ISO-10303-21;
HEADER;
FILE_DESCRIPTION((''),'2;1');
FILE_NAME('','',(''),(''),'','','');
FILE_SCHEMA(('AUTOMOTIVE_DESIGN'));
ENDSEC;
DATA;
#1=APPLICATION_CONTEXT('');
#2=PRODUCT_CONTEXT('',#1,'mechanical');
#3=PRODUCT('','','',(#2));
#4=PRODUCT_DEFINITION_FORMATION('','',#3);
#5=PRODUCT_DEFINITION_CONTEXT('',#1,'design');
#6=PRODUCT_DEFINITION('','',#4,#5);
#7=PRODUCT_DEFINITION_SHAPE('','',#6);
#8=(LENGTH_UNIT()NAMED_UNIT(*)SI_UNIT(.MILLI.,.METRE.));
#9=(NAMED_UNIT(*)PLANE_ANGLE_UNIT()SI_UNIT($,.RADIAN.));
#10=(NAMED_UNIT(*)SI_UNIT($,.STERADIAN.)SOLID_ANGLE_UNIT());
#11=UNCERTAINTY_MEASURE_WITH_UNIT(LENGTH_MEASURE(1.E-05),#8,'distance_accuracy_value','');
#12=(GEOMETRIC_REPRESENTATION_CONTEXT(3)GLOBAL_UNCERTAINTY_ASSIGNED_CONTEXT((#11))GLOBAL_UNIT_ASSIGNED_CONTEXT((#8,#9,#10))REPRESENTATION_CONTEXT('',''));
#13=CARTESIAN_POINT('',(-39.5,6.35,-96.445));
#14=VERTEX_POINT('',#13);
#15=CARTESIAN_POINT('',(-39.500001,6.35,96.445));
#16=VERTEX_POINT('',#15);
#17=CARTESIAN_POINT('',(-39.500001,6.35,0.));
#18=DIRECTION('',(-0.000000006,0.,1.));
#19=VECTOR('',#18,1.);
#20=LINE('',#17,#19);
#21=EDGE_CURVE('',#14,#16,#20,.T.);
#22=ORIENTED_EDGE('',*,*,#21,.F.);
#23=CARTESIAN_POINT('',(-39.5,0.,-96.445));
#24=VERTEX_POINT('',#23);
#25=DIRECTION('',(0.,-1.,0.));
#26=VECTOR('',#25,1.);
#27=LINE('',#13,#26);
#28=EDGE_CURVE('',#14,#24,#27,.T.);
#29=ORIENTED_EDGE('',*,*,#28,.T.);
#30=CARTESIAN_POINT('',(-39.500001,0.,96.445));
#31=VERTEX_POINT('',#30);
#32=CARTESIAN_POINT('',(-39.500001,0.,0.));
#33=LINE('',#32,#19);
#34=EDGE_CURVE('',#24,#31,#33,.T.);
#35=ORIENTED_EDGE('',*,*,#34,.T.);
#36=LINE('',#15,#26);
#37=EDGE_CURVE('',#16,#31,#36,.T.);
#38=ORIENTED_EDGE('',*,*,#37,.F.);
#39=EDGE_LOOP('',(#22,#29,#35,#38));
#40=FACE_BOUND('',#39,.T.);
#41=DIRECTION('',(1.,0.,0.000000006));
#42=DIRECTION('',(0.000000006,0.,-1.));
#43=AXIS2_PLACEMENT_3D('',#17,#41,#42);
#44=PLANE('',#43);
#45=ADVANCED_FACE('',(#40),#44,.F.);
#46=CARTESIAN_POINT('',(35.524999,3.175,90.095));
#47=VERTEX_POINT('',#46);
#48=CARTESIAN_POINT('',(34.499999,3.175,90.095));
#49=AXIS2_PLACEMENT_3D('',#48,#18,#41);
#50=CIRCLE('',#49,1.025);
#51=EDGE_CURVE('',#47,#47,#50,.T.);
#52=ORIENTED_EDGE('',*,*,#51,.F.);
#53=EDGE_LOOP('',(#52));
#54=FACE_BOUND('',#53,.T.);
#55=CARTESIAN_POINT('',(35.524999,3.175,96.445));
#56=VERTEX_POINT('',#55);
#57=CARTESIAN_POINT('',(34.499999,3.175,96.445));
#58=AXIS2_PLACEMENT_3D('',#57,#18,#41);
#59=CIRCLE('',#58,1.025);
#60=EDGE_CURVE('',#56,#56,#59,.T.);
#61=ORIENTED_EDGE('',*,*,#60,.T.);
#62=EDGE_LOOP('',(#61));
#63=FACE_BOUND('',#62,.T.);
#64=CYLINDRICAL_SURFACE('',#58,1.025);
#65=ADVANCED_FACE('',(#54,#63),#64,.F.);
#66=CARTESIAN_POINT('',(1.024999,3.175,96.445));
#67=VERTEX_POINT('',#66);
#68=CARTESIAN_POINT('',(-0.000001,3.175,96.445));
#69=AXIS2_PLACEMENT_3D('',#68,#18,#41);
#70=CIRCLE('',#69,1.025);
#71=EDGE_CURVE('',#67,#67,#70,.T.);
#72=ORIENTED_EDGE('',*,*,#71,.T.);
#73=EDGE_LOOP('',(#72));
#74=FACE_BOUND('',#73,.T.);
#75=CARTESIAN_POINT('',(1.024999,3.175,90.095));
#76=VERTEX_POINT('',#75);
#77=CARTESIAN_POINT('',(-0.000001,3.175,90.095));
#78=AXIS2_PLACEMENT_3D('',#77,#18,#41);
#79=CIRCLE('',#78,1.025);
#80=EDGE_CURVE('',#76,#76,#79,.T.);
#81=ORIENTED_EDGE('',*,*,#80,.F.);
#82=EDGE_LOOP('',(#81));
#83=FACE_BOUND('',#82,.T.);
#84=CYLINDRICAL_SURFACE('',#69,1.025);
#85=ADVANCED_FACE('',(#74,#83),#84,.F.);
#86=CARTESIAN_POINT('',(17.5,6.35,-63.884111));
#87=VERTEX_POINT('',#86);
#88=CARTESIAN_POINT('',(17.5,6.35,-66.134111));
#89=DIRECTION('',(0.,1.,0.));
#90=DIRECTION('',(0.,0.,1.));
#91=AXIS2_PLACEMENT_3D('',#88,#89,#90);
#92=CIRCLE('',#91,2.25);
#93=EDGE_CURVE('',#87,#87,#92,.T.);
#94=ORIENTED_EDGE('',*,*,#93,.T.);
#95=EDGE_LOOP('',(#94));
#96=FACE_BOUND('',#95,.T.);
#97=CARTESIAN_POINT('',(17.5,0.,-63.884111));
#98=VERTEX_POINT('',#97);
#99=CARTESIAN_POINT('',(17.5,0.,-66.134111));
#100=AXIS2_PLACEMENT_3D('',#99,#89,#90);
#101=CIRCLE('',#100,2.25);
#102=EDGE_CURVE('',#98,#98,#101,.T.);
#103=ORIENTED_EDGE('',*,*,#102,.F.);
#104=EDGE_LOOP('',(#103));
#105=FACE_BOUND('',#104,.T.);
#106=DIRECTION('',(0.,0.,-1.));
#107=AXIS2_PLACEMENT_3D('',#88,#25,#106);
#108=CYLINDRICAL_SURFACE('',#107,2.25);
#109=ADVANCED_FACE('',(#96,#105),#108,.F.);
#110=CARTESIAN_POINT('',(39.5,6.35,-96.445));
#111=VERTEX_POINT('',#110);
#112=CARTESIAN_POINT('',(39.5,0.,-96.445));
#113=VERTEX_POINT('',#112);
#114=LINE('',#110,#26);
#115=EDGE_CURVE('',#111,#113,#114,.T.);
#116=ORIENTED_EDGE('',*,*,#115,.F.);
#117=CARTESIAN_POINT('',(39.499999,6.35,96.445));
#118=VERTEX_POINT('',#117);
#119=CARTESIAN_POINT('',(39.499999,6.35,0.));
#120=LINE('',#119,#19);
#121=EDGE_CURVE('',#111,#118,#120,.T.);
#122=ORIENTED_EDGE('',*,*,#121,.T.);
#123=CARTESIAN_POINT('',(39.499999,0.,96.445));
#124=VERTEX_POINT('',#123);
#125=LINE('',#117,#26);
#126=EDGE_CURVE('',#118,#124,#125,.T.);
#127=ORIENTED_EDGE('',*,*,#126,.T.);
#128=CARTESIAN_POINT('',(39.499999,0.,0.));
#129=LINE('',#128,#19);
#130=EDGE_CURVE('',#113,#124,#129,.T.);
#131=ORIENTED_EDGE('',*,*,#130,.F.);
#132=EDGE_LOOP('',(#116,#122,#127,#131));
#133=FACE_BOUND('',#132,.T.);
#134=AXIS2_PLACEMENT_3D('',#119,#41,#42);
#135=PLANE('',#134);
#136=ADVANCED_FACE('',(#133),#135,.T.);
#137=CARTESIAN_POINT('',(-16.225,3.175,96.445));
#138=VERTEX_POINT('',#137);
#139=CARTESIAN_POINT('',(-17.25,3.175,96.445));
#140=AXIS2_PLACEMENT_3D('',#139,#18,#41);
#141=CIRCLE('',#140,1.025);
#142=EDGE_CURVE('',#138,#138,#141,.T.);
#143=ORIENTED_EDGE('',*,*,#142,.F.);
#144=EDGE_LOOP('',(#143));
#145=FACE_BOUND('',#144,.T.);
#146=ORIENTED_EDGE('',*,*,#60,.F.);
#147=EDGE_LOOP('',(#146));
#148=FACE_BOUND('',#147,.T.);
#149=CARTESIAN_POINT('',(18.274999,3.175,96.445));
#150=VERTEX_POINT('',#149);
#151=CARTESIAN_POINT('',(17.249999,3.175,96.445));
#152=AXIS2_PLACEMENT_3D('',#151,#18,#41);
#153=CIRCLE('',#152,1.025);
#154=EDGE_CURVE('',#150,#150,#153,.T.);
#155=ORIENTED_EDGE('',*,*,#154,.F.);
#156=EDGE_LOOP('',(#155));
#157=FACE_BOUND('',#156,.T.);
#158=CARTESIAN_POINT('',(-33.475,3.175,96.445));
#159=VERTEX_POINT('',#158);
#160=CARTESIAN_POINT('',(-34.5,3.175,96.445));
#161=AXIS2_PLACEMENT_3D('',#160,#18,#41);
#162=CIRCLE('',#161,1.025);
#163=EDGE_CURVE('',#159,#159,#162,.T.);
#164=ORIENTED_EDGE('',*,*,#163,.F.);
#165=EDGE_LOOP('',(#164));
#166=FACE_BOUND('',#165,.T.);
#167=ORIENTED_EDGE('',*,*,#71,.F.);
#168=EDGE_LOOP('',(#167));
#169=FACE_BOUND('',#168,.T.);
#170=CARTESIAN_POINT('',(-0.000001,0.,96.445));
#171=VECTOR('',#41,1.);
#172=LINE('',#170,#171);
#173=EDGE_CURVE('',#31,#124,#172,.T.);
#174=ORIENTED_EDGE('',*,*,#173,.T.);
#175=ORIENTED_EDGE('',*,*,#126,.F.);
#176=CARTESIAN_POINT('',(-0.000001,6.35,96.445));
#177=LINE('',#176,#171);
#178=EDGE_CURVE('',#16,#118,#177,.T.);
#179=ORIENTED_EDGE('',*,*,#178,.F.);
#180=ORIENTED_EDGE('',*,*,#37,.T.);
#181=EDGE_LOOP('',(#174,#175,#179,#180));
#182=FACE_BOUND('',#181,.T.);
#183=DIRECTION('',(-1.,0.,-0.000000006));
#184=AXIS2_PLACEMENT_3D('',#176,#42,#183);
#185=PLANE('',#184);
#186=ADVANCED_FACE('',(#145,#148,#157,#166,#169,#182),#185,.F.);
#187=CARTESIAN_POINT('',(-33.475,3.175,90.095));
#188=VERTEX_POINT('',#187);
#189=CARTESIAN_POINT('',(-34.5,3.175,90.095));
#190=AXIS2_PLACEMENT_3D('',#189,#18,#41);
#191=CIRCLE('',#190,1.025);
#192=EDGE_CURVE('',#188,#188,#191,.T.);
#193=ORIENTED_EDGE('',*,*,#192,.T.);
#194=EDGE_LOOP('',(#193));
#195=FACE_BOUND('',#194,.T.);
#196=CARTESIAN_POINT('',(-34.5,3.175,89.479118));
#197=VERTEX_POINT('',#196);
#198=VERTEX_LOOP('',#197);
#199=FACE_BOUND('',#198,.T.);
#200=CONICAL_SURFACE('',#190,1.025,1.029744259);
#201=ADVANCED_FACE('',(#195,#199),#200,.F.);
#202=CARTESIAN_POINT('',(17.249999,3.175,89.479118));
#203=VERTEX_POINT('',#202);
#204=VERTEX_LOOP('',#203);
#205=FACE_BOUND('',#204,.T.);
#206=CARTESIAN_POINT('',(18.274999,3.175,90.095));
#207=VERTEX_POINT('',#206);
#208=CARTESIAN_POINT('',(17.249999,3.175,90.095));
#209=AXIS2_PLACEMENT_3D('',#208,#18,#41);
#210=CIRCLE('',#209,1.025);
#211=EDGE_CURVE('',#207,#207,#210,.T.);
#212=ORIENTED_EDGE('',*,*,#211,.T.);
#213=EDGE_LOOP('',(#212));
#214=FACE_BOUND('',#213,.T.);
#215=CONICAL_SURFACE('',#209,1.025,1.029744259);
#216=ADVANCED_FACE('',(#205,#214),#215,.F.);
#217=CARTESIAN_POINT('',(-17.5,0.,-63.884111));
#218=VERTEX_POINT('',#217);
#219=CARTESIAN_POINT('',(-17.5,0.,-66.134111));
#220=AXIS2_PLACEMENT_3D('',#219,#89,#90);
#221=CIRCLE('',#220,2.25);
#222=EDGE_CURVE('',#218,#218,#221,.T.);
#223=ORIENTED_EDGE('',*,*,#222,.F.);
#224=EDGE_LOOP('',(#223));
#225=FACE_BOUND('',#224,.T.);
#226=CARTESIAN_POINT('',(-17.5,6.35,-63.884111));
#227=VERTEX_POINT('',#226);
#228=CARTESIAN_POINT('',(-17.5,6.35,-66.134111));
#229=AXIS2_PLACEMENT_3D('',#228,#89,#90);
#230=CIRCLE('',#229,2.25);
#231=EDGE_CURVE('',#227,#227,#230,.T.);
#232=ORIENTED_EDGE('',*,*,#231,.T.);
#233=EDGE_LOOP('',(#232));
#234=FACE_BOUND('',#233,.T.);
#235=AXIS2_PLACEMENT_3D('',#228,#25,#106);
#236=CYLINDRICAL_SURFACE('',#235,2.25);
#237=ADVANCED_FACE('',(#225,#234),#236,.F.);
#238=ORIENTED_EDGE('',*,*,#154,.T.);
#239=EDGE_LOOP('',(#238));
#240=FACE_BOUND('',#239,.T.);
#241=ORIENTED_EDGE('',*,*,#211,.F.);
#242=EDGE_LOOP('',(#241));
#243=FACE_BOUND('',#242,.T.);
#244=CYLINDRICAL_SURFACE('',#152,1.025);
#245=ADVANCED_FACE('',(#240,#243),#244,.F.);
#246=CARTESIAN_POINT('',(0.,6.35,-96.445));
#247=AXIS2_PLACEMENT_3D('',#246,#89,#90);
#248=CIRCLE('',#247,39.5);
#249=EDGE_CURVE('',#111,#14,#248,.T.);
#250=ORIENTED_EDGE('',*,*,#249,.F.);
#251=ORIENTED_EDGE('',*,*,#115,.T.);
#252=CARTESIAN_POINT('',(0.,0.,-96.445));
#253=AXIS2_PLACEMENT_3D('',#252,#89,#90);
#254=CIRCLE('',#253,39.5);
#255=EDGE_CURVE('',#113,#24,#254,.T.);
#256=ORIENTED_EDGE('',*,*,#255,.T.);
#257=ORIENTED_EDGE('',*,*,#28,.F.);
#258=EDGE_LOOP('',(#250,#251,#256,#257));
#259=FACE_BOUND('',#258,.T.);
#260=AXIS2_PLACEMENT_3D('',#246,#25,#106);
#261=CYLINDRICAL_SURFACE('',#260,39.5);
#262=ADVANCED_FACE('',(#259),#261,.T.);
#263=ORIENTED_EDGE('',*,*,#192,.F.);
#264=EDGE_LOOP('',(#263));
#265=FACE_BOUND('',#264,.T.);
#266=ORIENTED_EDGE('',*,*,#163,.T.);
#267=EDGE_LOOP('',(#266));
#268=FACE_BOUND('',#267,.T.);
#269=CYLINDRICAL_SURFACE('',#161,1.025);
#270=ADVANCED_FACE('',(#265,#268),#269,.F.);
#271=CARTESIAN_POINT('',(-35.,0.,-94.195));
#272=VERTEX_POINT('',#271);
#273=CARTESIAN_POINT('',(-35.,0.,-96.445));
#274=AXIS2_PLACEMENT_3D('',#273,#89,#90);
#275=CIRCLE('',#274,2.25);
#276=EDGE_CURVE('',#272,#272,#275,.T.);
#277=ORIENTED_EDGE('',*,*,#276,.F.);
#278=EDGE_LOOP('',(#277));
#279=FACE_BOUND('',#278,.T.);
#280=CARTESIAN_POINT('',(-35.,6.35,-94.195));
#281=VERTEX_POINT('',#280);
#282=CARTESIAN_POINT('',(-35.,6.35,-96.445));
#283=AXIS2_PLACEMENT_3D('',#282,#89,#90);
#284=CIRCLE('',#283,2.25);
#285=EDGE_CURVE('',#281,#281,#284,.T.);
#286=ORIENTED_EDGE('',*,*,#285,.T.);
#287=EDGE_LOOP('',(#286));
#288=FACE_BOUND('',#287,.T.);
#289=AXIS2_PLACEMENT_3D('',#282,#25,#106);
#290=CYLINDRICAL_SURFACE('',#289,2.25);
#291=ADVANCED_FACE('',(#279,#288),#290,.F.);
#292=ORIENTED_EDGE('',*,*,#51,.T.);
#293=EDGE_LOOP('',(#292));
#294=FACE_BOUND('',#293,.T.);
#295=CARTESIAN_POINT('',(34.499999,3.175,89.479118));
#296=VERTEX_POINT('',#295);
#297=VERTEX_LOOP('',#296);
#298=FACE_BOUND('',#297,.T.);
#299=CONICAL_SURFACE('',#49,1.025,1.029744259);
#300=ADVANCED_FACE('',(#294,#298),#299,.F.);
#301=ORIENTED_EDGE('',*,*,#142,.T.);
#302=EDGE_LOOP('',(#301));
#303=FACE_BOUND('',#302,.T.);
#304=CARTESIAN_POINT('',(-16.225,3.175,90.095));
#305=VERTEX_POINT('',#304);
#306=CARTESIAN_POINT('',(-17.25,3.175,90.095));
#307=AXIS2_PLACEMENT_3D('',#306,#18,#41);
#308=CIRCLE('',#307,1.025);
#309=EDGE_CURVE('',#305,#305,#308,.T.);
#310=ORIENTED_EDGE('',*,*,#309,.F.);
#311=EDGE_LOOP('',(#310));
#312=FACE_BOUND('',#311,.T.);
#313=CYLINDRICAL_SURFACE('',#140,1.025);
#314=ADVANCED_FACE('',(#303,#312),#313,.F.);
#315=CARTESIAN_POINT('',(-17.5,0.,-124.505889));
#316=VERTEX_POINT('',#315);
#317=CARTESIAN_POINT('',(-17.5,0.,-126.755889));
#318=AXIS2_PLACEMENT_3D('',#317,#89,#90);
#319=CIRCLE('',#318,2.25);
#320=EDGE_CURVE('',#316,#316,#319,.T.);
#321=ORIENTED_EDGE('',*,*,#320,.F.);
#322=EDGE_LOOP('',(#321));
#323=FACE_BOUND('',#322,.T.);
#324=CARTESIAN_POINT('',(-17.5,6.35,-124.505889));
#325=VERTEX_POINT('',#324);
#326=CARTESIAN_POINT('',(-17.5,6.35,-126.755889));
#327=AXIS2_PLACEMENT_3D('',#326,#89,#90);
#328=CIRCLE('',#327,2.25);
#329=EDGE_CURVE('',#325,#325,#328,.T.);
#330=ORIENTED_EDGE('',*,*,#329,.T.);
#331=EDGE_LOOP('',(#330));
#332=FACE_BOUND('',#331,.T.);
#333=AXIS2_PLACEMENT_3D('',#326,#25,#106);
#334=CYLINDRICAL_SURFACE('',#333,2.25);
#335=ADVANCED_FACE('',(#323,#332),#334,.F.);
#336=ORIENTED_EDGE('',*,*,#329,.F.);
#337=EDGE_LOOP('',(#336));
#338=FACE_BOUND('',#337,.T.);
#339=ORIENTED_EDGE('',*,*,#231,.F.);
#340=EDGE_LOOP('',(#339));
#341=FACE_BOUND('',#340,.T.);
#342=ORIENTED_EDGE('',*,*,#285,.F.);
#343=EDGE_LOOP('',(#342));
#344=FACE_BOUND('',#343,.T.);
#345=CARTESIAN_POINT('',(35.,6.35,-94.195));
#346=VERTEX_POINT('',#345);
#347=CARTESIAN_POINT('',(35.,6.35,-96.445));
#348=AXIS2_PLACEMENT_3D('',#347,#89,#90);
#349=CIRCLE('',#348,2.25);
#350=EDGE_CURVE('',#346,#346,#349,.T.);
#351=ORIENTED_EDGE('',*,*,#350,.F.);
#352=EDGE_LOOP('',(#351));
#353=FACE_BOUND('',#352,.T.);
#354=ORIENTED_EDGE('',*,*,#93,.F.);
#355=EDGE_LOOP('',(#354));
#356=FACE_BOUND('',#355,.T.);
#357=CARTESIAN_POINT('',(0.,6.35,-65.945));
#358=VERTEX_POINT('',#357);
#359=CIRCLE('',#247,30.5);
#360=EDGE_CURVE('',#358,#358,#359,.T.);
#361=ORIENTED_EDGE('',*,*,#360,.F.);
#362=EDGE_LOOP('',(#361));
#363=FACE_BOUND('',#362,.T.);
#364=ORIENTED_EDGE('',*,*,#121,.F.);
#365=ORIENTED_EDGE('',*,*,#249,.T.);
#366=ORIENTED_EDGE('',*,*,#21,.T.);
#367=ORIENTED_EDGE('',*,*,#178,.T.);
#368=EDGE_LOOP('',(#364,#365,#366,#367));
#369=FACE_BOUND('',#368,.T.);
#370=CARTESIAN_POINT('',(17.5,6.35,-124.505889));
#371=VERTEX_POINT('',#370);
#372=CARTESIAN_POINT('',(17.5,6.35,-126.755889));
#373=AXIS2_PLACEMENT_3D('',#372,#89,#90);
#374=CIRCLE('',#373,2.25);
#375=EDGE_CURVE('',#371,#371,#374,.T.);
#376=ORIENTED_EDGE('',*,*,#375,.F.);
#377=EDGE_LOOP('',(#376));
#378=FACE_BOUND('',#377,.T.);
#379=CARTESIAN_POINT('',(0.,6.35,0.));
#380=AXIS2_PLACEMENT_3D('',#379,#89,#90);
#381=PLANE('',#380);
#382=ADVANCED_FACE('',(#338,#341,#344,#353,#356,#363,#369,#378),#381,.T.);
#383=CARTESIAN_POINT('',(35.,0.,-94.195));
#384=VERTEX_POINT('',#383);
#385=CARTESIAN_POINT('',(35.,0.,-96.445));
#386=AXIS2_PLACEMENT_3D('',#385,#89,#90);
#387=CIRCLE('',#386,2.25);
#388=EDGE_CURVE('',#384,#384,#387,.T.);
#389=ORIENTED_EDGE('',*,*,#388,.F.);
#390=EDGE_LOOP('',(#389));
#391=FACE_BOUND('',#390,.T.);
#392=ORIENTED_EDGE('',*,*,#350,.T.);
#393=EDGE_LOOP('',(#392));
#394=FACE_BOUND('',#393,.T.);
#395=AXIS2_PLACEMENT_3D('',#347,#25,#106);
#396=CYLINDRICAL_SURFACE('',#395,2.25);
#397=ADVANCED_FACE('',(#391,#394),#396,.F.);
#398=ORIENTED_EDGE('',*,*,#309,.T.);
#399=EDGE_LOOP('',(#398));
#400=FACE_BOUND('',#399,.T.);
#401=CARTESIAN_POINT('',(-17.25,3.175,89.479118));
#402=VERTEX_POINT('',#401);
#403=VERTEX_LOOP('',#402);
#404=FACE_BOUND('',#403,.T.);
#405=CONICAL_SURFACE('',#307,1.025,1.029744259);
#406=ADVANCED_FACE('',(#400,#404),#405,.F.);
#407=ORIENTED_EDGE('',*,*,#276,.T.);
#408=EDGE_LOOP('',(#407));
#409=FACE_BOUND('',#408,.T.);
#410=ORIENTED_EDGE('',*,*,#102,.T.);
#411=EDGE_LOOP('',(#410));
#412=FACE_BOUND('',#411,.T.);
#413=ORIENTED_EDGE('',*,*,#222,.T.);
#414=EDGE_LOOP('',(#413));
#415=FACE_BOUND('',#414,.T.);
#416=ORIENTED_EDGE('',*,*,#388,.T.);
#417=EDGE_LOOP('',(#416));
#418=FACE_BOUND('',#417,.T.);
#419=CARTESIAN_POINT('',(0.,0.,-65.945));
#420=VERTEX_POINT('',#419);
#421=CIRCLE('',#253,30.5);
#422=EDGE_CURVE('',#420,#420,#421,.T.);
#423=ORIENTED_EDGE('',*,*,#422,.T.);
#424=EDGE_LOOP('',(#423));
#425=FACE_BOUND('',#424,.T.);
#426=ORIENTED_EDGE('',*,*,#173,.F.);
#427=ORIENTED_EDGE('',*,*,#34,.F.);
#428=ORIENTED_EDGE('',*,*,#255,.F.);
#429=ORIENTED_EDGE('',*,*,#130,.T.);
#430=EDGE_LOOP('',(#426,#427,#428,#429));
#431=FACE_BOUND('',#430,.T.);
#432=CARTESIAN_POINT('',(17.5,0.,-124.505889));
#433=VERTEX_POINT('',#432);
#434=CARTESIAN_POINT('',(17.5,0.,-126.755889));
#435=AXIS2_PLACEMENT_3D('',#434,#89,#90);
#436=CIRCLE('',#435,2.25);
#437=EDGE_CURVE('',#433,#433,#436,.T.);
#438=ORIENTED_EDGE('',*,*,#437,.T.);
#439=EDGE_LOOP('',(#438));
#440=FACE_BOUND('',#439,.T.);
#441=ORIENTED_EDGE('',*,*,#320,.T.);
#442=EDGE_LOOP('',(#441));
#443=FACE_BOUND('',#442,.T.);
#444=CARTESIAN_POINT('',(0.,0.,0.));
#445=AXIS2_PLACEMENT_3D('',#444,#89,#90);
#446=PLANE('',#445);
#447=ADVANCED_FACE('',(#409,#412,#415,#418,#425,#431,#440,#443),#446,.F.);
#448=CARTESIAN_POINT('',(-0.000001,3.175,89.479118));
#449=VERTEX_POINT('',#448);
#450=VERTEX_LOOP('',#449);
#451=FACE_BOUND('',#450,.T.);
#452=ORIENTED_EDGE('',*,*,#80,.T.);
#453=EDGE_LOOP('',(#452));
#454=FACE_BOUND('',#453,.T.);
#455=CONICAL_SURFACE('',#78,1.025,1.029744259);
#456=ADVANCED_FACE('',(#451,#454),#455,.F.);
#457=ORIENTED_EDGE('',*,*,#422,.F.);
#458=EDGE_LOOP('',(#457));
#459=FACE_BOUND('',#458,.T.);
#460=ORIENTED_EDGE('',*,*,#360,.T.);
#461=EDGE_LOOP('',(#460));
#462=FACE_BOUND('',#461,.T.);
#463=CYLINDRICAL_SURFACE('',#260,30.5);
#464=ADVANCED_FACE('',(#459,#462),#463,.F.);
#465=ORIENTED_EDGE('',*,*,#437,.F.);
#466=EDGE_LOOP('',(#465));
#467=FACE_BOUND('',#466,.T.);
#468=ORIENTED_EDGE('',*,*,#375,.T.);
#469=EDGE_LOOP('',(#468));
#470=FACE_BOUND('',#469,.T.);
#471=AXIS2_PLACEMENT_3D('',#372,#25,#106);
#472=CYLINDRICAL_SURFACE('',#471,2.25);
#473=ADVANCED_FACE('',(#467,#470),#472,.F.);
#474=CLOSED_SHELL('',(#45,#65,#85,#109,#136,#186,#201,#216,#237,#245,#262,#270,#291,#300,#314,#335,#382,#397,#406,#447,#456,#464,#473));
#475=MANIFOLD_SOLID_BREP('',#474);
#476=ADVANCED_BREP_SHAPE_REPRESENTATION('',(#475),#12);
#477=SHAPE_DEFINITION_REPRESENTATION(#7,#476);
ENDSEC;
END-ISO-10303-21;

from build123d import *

# Parameters (mm, degrees)
BOSS_EXTRUDE1_OUTLINE_R      = 2.25
BOSS_EXTRUDE1_OUTLINE_R_2    = 30.5
BOSS_EXTRUDE1_DEPTH          = 6.35
M2_5X0_45_TAPPED_HOLE1_D     = 2.05
M2_5X0_45_TAPPED_HOLE1_DEPTH = 6.35
M2_5X0_45_TAPPED_HOLE1_TIP   = 0.615882135


# Read off the part's stored shape, not the designer's step: Boss-Extrude1
with BuildPart() as part:
    # Boss-Extrude1 outline → Boss-Extrude1 (new body)
    with BuildSketch(Plane(origin=(0, 0, 0), x_dir=(1, 0, 0), z_dir=(0, 1, 0))):
        with BuildLine():
            ThreePointArc((39.5, 96.444999522), (2.39e-07, 135.945), (-39.5, 96.445))
            Line((-39.5, 96.445), (-39.500001167, -96.445))
            Line((-39.500001167, -96.445), (39.499998833, -96.445000478))
            Line((39.499998833, -96.445000478), (39.5, 96.444999522))
        make_face()
        with Locations((-17.5, 66.134110868)):
            Circle(BOSS_EXTRUDE1_OUTLINE_R, mode=Mode.SUBTRACT)
        with Locations((-35, 96.445)):
            Circle(BOSS_EXTRUDE1_OUTLINE_R, mode=Mode.SUBTRACT)
        with Locations((-17.5, 126.755889132)):
            Circle(BOSS_EXTRUDE1_OUTLINE_R, mode=Mode.SUBTRACT)
        with Locations((17.5, 66.134110868)):
            Circle(BOSS_EXTRUDE1_OUTLINE_R, mode=Mode.SUBTRACT)
        with Locations((0, 96.445)):
            Circle(BOSS_EXTRUDE1_OUTLINE_R_2, mode=Mode.SUBTRACT)
        with Locations((17.5, 126.755889132)):
            Circle(BOSS_EXTRUDE1_OUTLINE_R, mode=Mode.SUBTRACT)
        with Locations((35, 96.445)):
            Circle(BOSS_EXTRUDE1_OUTLINE_R, mode=Mode.SUBTRACT)
    extrude(amount=BOSS_EXTRUDE1_DEPTH)

    # M2.5x0.45 Tapped Hole1
    with Locations(Plane(origin=(-5.84e-07, 0, 96.445000239), x_dir=(1.0, 0, 6.0503381489132905e-09), z_dir=(-6.0503381489132905e-09, 0, 1.0))):
        with Locations((0, 3.175), (17.249999708, 3.175), (34.499999416, 3.175), (-17.249999708, 3.175), (-34.499999416, 3.175)):
            Hole(M2_5X0_45_TAPPED_HOLE1_D / 2, depth=M2_5X0_45_TAPPED_HOLE1_DEPTH)
            with Locations((0, 0, -(M2_5X0_45_TAPPED_HOLE1_DEPTH + M2_5X0_45_TAPPED_HOLE1_TIP / 2))):  # 118° drill point
                Cone(0, M2_5X0_45_TAPPED_HOLE1_D / 2, M2_5X0_45_TAPPED_HOLE1_TIP, mode=Mode.SUBTRACT)


solid = part.part
